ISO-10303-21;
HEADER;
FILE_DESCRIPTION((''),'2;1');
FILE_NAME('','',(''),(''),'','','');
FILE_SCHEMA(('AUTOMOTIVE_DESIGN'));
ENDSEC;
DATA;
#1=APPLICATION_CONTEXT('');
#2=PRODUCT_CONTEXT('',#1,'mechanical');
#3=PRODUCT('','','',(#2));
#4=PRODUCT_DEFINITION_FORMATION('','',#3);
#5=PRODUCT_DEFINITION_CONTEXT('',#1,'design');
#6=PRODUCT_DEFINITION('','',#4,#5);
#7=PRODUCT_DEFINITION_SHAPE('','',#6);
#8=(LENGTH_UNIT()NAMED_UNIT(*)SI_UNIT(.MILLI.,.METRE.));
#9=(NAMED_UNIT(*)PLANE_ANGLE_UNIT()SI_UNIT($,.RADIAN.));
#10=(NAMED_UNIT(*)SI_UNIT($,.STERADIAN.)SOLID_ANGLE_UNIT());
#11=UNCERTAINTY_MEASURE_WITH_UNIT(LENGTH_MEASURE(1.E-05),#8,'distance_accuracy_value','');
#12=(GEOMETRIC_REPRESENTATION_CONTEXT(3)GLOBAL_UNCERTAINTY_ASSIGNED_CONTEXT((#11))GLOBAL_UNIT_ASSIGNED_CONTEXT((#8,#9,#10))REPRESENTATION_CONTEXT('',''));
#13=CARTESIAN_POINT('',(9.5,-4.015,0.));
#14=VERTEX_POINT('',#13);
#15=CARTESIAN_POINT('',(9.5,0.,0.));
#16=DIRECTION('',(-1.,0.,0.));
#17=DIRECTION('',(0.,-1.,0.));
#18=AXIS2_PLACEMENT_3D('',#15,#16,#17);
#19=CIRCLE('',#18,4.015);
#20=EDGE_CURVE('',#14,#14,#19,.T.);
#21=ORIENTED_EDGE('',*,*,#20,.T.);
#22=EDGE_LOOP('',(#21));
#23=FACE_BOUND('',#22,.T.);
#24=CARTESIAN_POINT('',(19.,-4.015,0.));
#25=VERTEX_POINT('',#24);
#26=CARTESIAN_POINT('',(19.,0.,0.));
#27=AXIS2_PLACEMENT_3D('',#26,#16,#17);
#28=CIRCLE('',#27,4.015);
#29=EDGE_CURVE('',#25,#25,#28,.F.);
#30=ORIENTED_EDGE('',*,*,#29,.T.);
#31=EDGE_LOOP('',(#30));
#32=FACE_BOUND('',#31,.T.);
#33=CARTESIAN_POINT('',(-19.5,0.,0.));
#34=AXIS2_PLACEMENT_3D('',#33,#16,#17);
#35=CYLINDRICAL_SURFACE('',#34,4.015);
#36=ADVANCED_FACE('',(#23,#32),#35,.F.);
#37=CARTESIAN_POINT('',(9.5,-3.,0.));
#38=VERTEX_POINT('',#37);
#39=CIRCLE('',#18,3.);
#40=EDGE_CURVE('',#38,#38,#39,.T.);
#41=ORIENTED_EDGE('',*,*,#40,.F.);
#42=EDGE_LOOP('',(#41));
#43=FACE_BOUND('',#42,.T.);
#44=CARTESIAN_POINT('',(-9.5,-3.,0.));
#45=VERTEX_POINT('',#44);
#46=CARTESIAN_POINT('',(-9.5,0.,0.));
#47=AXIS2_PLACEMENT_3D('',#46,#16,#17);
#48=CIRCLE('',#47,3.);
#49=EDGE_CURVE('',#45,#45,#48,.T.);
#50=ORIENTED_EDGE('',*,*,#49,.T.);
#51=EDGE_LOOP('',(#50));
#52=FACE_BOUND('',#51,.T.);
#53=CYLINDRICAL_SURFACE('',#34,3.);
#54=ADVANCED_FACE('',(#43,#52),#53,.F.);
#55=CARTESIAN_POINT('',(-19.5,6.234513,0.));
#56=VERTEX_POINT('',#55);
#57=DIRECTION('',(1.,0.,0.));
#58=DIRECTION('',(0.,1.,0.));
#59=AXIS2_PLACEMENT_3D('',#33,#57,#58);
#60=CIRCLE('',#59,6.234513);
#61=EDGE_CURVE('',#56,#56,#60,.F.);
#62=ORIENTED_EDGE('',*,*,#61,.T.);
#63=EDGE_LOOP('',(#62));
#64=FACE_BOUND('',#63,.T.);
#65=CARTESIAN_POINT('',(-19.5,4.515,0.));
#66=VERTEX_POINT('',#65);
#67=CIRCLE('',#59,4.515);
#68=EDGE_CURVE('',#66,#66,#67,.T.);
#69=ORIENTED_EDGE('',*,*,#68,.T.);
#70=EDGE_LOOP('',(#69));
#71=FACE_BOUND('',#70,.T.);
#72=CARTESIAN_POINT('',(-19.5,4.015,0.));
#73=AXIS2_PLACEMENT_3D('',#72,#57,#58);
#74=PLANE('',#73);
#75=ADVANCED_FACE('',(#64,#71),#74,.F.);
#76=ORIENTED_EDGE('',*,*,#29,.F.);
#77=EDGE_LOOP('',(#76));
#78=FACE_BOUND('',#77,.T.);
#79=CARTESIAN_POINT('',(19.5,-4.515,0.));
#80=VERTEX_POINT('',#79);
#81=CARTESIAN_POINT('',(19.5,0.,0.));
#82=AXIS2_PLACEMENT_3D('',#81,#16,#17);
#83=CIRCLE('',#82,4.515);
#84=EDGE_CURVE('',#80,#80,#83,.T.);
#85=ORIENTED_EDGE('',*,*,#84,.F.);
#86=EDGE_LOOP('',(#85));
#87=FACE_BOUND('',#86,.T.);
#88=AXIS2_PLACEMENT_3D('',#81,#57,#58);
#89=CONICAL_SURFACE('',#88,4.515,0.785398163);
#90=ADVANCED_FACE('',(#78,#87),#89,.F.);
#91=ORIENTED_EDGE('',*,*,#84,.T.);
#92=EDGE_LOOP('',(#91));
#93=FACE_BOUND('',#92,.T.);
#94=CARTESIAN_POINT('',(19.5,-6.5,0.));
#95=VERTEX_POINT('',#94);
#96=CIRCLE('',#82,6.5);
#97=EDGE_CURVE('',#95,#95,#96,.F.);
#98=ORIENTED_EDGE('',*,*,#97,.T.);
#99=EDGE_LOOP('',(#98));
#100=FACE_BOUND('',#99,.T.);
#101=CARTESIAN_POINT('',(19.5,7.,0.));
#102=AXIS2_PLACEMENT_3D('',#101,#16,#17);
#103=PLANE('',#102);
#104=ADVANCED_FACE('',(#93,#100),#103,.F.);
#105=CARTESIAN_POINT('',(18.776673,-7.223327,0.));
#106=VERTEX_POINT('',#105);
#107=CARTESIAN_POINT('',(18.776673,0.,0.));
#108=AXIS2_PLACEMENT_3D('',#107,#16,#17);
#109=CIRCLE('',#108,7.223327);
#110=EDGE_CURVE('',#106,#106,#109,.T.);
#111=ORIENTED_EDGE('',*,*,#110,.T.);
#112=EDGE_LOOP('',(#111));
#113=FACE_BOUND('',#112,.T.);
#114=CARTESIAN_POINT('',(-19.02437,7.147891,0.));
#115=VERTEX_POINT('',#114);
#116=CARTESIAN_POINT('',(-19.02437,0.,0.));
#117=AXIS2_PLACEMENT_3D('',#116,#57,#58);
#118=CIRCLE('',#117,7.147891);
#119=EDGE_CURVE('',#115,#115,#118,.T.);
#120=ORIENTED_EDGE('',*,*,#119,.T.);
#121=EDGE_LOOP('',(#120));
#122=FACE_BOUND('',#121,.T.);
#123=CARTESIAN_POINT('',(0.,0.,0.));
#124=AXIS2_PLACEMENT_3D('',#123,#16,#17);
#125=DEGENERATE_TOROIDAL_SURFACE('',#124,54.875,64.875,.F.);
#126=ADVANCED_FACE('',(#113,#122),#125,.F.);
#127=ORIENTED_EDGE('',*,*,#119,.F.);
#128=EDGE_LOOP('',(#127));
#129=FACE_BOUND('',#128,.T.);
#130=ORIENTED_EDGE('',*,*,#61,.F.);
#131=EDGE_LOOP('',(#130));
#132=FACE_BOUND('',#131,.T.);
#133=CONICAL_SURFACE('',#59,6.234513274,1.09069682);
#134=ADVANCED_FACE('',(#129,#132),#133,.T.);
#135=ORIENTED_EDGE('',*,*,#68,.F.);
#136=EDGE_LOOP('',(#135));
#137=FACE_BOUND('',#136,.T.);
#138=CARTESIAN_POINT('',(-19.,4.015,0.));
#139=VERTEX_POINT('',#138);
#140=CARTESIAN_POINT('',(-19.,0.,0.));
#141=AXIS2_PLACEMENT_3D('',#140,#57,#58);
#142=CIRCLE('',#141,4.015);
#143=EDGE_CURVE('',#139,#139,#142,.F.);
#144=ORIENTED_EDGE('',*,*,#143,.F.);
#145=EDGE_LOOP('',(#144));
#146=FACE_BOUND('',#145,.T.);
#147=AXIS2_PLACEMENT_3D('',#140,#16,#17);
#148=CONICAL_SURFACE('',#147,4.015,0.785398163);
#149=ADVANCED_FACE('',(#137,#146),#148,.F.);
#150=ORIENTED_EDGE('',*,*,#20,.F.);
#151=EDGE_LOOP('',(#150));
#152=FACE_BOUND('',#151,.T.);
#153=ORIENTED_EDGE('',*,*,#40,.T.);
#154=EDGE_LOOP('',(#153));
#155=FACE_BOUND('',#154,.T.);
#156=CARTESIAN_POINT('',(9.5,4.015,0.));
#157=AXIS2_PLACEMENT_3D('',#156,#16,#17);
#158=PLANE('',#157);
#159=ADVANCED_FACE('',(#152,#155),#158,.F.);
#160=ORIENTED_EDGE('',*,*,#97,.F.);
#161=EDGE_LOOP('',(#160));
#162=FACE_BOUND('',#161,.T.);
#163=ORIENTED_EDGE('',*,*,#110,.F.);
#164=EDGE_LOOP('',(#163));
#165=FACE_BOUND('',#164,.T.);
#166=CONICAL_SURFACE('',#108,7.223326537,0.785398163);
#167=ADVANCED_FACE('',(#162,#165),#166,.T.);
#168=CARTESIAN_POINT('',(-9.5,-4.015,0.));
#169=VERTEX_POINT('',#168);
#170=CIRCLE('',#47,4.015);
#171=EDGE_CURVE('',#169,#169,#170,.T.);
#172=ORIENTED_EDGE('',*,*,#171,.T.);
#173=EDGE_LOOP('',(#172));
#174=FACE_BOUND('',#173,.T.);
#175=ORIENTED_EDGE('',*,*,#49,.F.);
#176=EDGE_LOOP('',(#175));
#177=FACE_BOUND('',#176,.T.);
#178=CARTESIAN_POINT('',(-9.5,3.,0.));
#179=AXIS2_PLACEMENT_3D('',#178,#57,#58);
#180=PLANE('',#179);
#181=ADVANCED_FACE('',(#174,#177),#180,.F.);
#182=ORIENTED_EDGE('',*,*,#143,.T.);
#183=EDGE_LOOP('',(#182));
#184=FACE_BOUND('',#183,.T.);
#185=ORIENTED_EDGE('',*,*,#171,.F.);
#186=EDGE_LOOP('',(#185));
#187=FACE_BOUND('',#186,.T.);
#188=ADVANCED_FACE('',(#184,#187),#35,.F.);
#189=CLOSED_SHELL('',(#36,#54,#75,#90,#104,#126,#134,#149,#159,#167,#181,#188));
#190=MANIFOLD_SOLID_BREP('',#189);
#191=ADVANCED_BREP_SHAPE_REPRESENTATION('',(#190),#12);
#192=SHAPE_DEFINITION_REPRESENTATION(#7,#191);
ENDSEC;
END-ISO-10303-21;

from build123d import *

# Parameters (mm, degrees)
CHAMFER1_SIZE   = 0.5
CHAMFER1_SIZE_2 = 0.765486726


with BuildPart() as part:
    # Sketch1 → Revolve1 (revolve)
    with BuildSketch(Plane.XY, mode=Mode.PRIVATE) as revolve1_sk:
        with BuildLine():
            Line((19.5, 7), (19.5, 4.015))
            Line((19.5, 4.015), (9.5, 4.015))
            Line((9.5, 4.015), (9.5, 3))
            Line((9.5, 3), (-9.5, 3))
            Line((-9.5, 3), (-9.5, 4.015))
            Line((-9.5, 4.015), (-19.5, 4.015))
            Line((-19.5, 4.015), (-19.5, 7))
            ThreePointArc((-19.5, 7), (0, 10), (19.5, 7))
        make_face()
    revolve(revolve1_sk.sketch.rotate(Axis((-19.5, 0, 0), (1, 0, 0)), 180), axis=Axis((-19.5, 0, 0), (1, 0, 0)))

    # Chamfer1
    # the kernel refuses this chamfer: 0.765486726, 0.5 mm, written as the material it takes off along each edge
    with BuildSketch(Plane(origin=(19.5, 0, 0), x_dir=(0, -1, 0), z_dir=(0, 0, 1))) as chamfer1_piece_1:
        with BuildLine():
            Line((7 - CHAMFER1_SIZE, 0), (7.223326537, -0.723326537))
            ThreePointArc((7.223326537, -0.723326537), (7.116710271, -0.374271708), (7, 0))
            Line((7, 0), (7 - CHAMFER1_SIZE, 0))
        make_face()
    revolve(axis=Axis((19.5, 0, 0), (1, 0, 0)), mode=Mode.SUBTRACT)
    with BuildSketch(Plane(origin=(-19.5, 0, 0), x_dir=(0, -1, 0), z_dir=(0, 0, 1))) as chamfer1_piece_2:
        with BuildLine():
            Line((7 - CHAMFER1_SIZE_2, 0), (7.147890601, 0.475629668))
            ThreePointArc((7.147890601, 0.475629668), (7.077602322, 0.247969183), (7, 0))
            Line((7, 0), (7 - CHAMFER1_SIZE_2, 0))
        make_face()
    revolve(axis=Axis((-19.5, 0, 0), (1, 0, 0)), mode=Mode.SUBTRACT)
    with BuildSketch(Plane(origin=(-19.5, 0, 0), x_dir=(0, -1, 0), z_dir=(0, 0, 1))) as chamfer1_piece_3:
        Polygon((4.015, CHAMFER1_SIZE), (4.015 + CHAMFER1_SIZE, 0), (4.015, 0), align=None)
    revolve(axis=Axis((-19.5, 0, 0), (1, 0, 0)), mode=Mode.SUBTRACT)
    with BuildSketch(Plane(origin=(19.5, 0, 0), x_dir=(0, -1, 0), z_dir=(0, 0, 1))) as chamfer1_piece_4:
        Polygon((4.015 + CHAMFER1_SIZE, 0), (4.015, -CHAMFER1_SIZE), (4.015, 0), align=None)
    revolve(axis=Axis((19.5, 0, 0), (1, 0, 0)), mode=Mode.SUBTRACT)


solid = part.part
